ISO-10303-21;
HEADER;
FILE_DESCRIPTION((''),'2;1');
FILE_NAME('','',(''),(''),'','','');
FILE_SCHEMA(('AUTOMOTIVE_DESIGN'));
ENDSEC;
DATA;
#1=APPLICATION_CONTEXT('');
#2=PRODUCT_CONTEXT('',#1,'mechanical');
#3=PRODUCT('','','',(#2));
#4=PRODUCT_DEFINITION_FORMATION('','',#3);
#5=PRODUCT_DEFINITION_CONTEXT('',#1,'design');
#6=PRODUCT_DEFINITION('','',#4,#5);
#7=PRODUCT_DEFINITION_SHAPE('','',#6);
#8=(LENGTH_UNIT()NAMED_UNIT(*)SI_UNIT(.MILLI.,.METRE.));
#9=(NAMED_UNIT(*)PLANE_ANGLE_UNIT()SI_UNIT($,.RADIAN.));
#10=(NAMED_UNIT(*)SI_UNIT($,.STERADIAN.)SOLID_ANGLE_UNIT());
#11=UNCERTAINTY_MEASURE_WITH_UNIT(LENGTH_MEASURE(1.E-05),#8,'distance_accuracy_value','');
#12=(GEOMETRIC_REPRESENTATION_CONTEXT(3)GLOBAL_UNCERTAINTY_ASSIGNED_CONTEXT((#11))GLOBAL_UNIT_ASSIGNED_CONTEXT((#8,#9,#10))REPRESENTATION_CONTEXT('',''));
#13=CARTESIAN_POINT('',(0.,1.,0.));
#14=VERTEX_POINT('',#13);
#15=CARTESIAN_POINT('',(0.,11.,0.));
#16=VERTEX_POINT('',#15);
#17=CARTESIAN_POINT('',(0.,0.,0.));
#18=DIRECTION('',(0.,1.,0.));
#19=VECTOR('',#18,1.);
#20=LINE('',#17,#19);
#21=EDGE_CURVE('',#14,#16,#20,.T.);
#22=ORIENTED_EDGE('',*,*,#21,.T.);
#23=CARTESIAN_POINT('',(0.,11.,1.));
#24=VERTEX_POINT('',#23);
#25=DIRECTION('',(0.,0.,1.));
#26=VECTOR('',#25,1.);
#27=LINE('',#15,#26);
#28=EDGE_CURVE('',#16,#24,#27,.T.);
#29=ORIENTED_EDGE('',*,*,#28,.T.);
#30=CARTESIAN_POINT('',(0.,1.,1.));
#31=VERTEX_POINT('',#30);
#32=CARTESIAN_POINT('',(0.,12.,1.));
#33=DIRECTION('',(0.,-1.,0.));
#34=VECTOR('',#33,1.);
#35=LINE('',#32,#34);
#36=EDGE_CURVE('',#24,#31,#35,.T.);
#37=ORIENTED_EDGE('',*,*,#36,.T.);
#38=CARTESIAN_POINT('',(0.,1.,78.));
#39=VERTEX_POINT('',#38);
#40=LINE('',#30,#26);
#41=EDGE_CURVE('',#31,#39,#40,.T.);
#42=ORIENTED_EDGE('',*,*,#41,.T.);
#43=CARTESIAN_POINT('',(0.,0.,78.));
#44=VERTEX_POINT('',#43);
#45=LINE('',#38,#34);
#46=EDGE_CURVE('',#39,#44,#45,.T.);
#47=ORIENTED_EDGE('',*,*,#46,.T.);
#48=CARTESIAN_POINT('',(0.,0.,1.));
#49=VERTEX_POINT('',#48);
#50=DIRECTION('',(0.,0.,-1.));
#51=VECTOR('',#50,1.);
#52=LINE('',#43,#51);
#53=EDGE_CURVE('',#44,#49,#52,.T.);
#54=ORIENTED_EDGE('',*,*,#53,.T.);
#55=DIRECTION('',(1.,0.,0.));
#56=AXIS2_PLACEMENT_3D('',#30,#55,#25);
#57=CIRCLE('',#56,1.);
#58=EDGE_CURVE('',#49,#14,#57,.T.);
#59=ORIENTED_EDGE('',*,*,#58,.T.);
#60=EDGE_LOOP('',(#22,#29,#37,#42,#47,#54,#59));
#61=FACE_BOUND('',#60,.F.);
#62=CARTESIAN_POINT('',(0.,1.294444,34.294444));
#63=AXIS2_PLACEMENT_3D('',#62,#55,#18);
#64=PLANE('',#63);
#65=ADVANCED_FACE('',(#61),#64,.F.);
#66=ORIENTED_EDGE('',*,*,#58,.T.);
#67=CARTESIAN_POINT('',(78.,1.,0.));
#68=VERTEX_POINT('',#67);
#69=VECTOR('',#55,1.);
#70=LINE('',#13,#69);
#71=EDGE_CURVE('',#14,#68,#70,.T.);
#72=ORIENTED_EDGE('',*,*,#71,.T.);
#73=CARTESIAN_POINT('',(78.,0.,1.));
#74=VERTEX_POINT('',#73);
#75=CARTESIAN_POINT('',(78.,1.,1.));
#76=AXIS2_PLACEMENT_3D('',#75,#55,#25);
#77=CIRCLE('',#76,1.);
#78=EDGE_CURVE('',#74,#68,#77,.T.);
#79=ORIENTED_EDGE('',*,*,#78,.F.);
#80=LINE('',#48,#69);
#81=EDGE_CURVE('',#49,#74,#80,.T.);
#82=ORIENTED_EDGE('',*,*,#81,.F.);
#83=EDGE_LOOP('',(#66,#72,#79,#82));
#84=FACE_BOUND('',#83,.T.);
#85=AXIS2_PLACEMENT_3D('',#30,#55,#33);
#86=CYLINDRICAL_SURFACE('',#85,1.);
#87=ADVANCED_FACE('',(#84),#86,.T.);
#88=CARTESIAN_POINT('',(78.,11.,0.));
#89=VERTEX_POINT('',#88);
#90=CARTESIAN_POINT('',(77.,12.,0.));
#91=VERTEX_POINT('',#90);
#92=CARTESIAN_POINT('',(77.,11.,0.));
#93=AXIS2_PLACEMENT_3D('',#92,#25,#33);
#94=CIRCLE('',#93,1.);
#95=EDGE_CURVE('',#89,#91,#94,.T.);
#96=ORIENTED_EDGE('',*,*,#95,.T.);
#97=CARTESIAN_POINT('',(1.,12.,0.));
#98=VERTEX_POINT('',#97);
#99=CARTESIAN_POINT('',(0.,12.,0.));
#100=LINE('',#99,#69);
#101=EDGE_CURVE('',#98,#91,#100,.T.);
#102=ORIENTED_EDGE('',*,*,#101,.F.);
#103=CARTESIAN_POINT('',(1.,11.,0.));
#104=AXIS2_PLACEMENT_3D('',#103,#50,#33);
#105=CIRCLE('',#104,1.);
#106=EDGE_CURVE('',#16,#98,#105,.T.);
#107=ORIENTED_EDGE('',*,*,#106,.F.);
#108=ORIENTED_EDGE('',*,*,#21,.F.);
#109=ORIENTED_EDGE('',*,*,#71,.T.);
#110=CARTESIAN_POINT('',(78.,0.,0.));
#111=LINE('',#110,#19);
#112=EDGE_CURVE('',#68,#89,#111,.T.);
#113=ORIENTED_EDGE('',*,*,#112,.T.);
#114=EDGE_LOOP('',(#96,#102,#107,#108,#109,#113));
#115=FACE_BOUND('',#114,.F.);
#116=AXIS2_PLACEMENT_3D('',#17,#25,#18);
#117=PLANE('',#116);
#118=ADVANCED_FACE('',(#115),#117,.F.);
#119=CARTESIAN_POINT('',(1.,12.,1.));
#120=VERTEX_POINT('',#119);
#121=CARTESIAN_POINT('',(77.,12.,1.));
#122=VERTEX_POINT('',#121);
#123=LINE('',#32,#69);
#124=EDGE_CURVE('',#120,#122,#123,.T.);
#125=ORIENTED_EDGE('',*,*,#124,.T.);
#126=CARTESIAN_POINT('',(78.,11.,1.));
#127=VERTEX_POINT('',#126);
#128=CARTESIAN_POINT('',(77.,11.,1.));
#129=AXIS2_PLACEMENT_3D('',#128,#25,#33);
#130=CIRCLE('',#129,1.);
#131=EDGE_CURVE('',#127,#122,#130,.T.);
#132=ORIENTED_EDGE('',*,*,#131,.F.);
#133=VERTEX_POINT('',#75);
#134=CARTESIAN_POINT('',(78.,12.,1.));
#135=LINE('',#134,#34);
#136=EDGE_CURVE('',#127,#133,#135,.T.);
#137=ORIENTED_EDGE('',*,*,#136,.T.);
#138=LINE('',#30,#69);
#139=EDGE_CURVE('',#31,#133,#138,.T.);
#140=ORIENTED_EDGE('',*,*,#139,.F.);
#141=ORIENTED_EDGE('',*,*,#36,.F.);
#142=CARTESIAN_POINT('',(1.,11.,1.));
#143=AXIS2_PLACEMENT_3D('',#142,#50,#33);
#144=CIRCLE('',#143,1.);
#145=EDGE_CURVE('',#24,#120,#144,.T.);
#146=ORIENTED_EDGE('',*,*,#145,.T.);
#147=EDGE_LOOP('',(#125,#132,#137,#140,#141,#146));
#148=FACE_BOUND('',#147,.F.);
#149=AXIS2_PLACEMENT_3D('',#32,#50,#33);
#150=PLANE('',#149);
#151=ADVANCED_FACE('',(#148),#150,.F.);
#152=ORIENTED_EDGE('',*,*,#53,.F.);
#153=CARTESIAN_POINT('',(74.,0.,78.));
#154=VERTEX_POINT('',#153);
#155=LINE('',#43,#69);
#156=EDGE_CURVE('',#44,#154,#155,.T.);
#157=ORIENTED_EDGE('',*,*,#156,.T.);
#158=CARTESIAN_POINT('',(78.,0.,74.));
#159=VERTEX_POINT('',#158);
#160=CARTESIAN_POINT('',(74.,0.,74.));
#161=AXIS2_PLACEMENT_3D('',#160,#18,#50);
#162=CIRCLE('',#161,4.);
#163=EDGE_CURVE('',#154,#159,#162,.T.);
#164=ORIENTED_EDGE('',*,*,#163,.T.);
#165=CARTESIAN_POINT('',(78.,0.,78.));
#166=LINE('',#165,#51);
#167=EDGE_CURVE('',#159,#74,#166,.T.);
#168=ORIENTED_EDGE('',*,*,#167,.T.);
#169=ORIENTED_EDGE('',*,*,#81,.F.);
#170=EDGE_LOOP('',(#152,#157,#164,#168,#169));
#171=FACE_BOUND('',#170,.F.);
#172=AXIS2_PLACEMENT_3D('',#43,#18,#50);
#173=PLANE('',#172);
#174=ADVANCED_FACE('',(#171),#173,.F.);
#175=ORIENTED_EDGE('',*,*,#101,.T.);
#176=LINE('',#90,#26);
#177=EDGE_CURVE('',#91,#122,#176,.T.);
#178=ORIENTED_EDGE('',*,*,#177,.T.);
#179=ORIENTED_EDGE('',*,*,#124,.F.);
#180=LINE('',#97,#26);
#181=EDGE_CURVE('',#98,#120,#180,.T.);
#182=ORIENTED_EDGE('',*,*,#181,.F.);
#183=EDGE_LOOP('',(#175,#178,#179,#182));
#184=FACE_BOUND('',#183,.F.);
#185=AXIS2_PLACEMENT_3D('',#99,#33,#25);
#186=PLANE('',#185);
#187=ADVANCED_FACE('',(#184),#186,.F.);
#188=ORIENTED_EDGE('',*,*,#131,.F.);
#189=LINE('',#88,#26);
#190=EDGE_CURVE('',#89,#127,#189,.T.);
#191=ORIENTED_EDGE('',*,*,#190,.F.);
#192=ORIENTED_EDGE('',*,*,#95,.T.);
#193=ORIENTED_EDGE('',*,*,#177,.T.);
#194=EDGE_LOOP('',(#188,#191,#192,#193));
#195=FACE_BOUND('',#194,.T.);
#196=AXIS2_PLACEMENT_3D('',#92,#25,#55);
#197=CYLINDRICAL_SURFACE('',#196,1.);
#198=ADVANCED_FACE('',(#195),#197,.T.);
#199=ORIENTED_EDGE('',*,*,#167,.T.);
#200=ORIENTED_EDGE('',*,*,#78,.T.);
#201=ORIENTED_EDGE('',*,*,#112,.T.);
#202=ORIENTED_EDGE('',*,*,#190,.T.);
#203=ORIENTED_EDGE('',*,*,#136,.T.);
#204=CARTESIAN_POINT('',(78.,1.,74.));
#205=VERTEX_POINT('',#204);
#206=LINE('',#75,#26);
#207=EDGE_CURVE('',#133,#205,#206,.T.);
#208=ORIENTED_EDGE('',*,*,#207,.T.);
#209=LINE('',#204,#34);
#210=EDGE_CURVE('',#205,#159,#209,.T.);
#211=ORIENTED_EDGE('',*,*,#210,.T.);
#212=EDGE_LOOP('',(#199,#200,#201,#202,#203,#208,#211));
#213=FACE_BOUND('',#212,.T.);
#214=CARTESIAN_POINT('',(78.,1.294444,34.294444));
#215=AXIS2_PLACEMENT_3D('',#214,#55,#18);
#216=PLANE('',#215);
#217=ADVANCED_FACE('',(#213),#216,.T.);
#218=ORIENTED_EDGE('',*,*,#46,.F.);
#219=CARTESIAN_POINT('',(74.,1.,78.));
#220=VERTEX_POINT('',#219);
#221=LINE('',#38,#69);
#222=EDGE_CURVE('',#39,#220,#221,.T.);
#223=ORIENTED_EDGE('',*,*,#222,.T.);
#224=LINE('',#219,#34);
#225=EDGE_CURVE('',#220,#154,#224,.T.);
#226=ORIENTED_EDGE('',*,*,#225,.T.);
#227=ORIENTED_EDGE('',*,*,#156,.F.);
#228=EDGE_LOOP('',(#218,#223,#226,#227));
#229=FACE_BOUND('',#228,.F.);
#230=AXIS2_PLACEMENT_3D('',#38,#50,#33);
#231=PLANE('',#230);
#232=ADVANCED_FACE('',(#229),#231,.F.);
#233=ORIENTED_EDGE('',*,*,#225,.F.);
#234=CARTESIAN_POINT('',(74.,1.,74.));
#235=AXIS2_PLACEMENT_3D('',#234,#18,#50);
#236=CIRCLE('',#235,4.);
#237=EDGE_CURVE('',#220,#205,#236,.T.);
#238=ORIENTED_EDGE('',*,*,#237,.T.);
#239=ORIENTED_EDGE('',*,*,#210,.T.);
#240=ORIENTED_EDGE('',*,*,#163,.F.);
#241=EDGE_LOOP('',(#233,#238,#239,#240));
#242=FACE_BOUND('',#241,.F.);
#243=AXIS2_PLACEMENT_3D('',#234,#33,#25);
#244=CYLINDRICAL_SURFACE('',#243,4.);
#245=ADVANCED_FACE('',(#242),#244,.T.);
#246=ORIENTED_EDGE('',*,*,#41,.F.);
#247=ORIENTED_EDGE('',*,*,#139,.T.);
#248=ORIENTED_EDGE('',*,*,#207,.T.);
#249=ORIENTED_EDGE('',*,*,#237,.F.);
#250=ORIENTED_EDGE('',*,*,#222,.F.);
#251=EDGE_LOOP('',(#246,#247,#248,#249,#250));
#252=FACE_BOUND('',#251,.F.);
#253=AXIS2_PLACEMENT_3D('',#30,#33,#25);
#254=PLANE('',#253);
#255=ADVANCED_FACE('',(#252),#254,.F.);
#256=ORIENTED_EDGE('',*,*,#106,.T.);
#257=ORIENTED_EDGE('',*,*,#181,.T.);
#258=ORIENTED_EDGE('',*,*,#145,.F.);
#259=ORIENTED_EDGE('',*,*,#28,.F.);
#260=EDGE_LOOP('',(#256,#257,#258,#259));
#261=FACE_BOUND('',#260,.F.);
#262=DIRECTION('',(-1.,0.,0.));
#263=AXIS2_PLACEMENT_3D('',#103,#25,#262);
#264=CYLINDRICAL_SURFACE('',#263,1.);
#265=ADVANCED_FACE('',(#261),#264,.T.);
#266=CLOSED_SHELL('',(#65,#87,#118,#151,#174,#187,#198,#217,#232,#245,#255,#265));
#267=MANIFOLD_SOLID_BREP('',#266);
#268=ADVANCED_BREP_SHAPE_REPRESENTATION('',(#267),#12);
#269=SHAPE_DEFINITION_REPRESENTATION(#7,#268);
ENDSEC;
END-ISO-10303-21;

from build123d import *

# Parameters (mm, degrees)
F1_DEPTH = 78
F2_R     = 4
F3_R     = 1


# Not quite as in the source:
# - two fillets or chamfers of one size are made in one step


with BuildPart() as f1:
    # F0 (on Right) → F1 (new body)
    with BuildSketch(Plane.YZ):
        Polygon((0, 78), (0, 0), (12, 0), (12, 1), (1, 1), (1, 78), align=None)
    extrude(amount=F1_DEPTH)

    # F2
    f2_edges = [f1.edges().sort_by_distance(p)[0] for p in [
        (78, 0.5, 78),
    ]]
    fillet(f2_edges, radius=F2_R)

    # F3
    f3_edges = [f1.edges().sort_by_distance(p)[0] for p in [
        (0, 12, 0.5),
        (39, 0, 0),
        (78, 12, 0.5),
    ]]
    fillet(f3_edges, radius=F3_R)


solid = f1.part
